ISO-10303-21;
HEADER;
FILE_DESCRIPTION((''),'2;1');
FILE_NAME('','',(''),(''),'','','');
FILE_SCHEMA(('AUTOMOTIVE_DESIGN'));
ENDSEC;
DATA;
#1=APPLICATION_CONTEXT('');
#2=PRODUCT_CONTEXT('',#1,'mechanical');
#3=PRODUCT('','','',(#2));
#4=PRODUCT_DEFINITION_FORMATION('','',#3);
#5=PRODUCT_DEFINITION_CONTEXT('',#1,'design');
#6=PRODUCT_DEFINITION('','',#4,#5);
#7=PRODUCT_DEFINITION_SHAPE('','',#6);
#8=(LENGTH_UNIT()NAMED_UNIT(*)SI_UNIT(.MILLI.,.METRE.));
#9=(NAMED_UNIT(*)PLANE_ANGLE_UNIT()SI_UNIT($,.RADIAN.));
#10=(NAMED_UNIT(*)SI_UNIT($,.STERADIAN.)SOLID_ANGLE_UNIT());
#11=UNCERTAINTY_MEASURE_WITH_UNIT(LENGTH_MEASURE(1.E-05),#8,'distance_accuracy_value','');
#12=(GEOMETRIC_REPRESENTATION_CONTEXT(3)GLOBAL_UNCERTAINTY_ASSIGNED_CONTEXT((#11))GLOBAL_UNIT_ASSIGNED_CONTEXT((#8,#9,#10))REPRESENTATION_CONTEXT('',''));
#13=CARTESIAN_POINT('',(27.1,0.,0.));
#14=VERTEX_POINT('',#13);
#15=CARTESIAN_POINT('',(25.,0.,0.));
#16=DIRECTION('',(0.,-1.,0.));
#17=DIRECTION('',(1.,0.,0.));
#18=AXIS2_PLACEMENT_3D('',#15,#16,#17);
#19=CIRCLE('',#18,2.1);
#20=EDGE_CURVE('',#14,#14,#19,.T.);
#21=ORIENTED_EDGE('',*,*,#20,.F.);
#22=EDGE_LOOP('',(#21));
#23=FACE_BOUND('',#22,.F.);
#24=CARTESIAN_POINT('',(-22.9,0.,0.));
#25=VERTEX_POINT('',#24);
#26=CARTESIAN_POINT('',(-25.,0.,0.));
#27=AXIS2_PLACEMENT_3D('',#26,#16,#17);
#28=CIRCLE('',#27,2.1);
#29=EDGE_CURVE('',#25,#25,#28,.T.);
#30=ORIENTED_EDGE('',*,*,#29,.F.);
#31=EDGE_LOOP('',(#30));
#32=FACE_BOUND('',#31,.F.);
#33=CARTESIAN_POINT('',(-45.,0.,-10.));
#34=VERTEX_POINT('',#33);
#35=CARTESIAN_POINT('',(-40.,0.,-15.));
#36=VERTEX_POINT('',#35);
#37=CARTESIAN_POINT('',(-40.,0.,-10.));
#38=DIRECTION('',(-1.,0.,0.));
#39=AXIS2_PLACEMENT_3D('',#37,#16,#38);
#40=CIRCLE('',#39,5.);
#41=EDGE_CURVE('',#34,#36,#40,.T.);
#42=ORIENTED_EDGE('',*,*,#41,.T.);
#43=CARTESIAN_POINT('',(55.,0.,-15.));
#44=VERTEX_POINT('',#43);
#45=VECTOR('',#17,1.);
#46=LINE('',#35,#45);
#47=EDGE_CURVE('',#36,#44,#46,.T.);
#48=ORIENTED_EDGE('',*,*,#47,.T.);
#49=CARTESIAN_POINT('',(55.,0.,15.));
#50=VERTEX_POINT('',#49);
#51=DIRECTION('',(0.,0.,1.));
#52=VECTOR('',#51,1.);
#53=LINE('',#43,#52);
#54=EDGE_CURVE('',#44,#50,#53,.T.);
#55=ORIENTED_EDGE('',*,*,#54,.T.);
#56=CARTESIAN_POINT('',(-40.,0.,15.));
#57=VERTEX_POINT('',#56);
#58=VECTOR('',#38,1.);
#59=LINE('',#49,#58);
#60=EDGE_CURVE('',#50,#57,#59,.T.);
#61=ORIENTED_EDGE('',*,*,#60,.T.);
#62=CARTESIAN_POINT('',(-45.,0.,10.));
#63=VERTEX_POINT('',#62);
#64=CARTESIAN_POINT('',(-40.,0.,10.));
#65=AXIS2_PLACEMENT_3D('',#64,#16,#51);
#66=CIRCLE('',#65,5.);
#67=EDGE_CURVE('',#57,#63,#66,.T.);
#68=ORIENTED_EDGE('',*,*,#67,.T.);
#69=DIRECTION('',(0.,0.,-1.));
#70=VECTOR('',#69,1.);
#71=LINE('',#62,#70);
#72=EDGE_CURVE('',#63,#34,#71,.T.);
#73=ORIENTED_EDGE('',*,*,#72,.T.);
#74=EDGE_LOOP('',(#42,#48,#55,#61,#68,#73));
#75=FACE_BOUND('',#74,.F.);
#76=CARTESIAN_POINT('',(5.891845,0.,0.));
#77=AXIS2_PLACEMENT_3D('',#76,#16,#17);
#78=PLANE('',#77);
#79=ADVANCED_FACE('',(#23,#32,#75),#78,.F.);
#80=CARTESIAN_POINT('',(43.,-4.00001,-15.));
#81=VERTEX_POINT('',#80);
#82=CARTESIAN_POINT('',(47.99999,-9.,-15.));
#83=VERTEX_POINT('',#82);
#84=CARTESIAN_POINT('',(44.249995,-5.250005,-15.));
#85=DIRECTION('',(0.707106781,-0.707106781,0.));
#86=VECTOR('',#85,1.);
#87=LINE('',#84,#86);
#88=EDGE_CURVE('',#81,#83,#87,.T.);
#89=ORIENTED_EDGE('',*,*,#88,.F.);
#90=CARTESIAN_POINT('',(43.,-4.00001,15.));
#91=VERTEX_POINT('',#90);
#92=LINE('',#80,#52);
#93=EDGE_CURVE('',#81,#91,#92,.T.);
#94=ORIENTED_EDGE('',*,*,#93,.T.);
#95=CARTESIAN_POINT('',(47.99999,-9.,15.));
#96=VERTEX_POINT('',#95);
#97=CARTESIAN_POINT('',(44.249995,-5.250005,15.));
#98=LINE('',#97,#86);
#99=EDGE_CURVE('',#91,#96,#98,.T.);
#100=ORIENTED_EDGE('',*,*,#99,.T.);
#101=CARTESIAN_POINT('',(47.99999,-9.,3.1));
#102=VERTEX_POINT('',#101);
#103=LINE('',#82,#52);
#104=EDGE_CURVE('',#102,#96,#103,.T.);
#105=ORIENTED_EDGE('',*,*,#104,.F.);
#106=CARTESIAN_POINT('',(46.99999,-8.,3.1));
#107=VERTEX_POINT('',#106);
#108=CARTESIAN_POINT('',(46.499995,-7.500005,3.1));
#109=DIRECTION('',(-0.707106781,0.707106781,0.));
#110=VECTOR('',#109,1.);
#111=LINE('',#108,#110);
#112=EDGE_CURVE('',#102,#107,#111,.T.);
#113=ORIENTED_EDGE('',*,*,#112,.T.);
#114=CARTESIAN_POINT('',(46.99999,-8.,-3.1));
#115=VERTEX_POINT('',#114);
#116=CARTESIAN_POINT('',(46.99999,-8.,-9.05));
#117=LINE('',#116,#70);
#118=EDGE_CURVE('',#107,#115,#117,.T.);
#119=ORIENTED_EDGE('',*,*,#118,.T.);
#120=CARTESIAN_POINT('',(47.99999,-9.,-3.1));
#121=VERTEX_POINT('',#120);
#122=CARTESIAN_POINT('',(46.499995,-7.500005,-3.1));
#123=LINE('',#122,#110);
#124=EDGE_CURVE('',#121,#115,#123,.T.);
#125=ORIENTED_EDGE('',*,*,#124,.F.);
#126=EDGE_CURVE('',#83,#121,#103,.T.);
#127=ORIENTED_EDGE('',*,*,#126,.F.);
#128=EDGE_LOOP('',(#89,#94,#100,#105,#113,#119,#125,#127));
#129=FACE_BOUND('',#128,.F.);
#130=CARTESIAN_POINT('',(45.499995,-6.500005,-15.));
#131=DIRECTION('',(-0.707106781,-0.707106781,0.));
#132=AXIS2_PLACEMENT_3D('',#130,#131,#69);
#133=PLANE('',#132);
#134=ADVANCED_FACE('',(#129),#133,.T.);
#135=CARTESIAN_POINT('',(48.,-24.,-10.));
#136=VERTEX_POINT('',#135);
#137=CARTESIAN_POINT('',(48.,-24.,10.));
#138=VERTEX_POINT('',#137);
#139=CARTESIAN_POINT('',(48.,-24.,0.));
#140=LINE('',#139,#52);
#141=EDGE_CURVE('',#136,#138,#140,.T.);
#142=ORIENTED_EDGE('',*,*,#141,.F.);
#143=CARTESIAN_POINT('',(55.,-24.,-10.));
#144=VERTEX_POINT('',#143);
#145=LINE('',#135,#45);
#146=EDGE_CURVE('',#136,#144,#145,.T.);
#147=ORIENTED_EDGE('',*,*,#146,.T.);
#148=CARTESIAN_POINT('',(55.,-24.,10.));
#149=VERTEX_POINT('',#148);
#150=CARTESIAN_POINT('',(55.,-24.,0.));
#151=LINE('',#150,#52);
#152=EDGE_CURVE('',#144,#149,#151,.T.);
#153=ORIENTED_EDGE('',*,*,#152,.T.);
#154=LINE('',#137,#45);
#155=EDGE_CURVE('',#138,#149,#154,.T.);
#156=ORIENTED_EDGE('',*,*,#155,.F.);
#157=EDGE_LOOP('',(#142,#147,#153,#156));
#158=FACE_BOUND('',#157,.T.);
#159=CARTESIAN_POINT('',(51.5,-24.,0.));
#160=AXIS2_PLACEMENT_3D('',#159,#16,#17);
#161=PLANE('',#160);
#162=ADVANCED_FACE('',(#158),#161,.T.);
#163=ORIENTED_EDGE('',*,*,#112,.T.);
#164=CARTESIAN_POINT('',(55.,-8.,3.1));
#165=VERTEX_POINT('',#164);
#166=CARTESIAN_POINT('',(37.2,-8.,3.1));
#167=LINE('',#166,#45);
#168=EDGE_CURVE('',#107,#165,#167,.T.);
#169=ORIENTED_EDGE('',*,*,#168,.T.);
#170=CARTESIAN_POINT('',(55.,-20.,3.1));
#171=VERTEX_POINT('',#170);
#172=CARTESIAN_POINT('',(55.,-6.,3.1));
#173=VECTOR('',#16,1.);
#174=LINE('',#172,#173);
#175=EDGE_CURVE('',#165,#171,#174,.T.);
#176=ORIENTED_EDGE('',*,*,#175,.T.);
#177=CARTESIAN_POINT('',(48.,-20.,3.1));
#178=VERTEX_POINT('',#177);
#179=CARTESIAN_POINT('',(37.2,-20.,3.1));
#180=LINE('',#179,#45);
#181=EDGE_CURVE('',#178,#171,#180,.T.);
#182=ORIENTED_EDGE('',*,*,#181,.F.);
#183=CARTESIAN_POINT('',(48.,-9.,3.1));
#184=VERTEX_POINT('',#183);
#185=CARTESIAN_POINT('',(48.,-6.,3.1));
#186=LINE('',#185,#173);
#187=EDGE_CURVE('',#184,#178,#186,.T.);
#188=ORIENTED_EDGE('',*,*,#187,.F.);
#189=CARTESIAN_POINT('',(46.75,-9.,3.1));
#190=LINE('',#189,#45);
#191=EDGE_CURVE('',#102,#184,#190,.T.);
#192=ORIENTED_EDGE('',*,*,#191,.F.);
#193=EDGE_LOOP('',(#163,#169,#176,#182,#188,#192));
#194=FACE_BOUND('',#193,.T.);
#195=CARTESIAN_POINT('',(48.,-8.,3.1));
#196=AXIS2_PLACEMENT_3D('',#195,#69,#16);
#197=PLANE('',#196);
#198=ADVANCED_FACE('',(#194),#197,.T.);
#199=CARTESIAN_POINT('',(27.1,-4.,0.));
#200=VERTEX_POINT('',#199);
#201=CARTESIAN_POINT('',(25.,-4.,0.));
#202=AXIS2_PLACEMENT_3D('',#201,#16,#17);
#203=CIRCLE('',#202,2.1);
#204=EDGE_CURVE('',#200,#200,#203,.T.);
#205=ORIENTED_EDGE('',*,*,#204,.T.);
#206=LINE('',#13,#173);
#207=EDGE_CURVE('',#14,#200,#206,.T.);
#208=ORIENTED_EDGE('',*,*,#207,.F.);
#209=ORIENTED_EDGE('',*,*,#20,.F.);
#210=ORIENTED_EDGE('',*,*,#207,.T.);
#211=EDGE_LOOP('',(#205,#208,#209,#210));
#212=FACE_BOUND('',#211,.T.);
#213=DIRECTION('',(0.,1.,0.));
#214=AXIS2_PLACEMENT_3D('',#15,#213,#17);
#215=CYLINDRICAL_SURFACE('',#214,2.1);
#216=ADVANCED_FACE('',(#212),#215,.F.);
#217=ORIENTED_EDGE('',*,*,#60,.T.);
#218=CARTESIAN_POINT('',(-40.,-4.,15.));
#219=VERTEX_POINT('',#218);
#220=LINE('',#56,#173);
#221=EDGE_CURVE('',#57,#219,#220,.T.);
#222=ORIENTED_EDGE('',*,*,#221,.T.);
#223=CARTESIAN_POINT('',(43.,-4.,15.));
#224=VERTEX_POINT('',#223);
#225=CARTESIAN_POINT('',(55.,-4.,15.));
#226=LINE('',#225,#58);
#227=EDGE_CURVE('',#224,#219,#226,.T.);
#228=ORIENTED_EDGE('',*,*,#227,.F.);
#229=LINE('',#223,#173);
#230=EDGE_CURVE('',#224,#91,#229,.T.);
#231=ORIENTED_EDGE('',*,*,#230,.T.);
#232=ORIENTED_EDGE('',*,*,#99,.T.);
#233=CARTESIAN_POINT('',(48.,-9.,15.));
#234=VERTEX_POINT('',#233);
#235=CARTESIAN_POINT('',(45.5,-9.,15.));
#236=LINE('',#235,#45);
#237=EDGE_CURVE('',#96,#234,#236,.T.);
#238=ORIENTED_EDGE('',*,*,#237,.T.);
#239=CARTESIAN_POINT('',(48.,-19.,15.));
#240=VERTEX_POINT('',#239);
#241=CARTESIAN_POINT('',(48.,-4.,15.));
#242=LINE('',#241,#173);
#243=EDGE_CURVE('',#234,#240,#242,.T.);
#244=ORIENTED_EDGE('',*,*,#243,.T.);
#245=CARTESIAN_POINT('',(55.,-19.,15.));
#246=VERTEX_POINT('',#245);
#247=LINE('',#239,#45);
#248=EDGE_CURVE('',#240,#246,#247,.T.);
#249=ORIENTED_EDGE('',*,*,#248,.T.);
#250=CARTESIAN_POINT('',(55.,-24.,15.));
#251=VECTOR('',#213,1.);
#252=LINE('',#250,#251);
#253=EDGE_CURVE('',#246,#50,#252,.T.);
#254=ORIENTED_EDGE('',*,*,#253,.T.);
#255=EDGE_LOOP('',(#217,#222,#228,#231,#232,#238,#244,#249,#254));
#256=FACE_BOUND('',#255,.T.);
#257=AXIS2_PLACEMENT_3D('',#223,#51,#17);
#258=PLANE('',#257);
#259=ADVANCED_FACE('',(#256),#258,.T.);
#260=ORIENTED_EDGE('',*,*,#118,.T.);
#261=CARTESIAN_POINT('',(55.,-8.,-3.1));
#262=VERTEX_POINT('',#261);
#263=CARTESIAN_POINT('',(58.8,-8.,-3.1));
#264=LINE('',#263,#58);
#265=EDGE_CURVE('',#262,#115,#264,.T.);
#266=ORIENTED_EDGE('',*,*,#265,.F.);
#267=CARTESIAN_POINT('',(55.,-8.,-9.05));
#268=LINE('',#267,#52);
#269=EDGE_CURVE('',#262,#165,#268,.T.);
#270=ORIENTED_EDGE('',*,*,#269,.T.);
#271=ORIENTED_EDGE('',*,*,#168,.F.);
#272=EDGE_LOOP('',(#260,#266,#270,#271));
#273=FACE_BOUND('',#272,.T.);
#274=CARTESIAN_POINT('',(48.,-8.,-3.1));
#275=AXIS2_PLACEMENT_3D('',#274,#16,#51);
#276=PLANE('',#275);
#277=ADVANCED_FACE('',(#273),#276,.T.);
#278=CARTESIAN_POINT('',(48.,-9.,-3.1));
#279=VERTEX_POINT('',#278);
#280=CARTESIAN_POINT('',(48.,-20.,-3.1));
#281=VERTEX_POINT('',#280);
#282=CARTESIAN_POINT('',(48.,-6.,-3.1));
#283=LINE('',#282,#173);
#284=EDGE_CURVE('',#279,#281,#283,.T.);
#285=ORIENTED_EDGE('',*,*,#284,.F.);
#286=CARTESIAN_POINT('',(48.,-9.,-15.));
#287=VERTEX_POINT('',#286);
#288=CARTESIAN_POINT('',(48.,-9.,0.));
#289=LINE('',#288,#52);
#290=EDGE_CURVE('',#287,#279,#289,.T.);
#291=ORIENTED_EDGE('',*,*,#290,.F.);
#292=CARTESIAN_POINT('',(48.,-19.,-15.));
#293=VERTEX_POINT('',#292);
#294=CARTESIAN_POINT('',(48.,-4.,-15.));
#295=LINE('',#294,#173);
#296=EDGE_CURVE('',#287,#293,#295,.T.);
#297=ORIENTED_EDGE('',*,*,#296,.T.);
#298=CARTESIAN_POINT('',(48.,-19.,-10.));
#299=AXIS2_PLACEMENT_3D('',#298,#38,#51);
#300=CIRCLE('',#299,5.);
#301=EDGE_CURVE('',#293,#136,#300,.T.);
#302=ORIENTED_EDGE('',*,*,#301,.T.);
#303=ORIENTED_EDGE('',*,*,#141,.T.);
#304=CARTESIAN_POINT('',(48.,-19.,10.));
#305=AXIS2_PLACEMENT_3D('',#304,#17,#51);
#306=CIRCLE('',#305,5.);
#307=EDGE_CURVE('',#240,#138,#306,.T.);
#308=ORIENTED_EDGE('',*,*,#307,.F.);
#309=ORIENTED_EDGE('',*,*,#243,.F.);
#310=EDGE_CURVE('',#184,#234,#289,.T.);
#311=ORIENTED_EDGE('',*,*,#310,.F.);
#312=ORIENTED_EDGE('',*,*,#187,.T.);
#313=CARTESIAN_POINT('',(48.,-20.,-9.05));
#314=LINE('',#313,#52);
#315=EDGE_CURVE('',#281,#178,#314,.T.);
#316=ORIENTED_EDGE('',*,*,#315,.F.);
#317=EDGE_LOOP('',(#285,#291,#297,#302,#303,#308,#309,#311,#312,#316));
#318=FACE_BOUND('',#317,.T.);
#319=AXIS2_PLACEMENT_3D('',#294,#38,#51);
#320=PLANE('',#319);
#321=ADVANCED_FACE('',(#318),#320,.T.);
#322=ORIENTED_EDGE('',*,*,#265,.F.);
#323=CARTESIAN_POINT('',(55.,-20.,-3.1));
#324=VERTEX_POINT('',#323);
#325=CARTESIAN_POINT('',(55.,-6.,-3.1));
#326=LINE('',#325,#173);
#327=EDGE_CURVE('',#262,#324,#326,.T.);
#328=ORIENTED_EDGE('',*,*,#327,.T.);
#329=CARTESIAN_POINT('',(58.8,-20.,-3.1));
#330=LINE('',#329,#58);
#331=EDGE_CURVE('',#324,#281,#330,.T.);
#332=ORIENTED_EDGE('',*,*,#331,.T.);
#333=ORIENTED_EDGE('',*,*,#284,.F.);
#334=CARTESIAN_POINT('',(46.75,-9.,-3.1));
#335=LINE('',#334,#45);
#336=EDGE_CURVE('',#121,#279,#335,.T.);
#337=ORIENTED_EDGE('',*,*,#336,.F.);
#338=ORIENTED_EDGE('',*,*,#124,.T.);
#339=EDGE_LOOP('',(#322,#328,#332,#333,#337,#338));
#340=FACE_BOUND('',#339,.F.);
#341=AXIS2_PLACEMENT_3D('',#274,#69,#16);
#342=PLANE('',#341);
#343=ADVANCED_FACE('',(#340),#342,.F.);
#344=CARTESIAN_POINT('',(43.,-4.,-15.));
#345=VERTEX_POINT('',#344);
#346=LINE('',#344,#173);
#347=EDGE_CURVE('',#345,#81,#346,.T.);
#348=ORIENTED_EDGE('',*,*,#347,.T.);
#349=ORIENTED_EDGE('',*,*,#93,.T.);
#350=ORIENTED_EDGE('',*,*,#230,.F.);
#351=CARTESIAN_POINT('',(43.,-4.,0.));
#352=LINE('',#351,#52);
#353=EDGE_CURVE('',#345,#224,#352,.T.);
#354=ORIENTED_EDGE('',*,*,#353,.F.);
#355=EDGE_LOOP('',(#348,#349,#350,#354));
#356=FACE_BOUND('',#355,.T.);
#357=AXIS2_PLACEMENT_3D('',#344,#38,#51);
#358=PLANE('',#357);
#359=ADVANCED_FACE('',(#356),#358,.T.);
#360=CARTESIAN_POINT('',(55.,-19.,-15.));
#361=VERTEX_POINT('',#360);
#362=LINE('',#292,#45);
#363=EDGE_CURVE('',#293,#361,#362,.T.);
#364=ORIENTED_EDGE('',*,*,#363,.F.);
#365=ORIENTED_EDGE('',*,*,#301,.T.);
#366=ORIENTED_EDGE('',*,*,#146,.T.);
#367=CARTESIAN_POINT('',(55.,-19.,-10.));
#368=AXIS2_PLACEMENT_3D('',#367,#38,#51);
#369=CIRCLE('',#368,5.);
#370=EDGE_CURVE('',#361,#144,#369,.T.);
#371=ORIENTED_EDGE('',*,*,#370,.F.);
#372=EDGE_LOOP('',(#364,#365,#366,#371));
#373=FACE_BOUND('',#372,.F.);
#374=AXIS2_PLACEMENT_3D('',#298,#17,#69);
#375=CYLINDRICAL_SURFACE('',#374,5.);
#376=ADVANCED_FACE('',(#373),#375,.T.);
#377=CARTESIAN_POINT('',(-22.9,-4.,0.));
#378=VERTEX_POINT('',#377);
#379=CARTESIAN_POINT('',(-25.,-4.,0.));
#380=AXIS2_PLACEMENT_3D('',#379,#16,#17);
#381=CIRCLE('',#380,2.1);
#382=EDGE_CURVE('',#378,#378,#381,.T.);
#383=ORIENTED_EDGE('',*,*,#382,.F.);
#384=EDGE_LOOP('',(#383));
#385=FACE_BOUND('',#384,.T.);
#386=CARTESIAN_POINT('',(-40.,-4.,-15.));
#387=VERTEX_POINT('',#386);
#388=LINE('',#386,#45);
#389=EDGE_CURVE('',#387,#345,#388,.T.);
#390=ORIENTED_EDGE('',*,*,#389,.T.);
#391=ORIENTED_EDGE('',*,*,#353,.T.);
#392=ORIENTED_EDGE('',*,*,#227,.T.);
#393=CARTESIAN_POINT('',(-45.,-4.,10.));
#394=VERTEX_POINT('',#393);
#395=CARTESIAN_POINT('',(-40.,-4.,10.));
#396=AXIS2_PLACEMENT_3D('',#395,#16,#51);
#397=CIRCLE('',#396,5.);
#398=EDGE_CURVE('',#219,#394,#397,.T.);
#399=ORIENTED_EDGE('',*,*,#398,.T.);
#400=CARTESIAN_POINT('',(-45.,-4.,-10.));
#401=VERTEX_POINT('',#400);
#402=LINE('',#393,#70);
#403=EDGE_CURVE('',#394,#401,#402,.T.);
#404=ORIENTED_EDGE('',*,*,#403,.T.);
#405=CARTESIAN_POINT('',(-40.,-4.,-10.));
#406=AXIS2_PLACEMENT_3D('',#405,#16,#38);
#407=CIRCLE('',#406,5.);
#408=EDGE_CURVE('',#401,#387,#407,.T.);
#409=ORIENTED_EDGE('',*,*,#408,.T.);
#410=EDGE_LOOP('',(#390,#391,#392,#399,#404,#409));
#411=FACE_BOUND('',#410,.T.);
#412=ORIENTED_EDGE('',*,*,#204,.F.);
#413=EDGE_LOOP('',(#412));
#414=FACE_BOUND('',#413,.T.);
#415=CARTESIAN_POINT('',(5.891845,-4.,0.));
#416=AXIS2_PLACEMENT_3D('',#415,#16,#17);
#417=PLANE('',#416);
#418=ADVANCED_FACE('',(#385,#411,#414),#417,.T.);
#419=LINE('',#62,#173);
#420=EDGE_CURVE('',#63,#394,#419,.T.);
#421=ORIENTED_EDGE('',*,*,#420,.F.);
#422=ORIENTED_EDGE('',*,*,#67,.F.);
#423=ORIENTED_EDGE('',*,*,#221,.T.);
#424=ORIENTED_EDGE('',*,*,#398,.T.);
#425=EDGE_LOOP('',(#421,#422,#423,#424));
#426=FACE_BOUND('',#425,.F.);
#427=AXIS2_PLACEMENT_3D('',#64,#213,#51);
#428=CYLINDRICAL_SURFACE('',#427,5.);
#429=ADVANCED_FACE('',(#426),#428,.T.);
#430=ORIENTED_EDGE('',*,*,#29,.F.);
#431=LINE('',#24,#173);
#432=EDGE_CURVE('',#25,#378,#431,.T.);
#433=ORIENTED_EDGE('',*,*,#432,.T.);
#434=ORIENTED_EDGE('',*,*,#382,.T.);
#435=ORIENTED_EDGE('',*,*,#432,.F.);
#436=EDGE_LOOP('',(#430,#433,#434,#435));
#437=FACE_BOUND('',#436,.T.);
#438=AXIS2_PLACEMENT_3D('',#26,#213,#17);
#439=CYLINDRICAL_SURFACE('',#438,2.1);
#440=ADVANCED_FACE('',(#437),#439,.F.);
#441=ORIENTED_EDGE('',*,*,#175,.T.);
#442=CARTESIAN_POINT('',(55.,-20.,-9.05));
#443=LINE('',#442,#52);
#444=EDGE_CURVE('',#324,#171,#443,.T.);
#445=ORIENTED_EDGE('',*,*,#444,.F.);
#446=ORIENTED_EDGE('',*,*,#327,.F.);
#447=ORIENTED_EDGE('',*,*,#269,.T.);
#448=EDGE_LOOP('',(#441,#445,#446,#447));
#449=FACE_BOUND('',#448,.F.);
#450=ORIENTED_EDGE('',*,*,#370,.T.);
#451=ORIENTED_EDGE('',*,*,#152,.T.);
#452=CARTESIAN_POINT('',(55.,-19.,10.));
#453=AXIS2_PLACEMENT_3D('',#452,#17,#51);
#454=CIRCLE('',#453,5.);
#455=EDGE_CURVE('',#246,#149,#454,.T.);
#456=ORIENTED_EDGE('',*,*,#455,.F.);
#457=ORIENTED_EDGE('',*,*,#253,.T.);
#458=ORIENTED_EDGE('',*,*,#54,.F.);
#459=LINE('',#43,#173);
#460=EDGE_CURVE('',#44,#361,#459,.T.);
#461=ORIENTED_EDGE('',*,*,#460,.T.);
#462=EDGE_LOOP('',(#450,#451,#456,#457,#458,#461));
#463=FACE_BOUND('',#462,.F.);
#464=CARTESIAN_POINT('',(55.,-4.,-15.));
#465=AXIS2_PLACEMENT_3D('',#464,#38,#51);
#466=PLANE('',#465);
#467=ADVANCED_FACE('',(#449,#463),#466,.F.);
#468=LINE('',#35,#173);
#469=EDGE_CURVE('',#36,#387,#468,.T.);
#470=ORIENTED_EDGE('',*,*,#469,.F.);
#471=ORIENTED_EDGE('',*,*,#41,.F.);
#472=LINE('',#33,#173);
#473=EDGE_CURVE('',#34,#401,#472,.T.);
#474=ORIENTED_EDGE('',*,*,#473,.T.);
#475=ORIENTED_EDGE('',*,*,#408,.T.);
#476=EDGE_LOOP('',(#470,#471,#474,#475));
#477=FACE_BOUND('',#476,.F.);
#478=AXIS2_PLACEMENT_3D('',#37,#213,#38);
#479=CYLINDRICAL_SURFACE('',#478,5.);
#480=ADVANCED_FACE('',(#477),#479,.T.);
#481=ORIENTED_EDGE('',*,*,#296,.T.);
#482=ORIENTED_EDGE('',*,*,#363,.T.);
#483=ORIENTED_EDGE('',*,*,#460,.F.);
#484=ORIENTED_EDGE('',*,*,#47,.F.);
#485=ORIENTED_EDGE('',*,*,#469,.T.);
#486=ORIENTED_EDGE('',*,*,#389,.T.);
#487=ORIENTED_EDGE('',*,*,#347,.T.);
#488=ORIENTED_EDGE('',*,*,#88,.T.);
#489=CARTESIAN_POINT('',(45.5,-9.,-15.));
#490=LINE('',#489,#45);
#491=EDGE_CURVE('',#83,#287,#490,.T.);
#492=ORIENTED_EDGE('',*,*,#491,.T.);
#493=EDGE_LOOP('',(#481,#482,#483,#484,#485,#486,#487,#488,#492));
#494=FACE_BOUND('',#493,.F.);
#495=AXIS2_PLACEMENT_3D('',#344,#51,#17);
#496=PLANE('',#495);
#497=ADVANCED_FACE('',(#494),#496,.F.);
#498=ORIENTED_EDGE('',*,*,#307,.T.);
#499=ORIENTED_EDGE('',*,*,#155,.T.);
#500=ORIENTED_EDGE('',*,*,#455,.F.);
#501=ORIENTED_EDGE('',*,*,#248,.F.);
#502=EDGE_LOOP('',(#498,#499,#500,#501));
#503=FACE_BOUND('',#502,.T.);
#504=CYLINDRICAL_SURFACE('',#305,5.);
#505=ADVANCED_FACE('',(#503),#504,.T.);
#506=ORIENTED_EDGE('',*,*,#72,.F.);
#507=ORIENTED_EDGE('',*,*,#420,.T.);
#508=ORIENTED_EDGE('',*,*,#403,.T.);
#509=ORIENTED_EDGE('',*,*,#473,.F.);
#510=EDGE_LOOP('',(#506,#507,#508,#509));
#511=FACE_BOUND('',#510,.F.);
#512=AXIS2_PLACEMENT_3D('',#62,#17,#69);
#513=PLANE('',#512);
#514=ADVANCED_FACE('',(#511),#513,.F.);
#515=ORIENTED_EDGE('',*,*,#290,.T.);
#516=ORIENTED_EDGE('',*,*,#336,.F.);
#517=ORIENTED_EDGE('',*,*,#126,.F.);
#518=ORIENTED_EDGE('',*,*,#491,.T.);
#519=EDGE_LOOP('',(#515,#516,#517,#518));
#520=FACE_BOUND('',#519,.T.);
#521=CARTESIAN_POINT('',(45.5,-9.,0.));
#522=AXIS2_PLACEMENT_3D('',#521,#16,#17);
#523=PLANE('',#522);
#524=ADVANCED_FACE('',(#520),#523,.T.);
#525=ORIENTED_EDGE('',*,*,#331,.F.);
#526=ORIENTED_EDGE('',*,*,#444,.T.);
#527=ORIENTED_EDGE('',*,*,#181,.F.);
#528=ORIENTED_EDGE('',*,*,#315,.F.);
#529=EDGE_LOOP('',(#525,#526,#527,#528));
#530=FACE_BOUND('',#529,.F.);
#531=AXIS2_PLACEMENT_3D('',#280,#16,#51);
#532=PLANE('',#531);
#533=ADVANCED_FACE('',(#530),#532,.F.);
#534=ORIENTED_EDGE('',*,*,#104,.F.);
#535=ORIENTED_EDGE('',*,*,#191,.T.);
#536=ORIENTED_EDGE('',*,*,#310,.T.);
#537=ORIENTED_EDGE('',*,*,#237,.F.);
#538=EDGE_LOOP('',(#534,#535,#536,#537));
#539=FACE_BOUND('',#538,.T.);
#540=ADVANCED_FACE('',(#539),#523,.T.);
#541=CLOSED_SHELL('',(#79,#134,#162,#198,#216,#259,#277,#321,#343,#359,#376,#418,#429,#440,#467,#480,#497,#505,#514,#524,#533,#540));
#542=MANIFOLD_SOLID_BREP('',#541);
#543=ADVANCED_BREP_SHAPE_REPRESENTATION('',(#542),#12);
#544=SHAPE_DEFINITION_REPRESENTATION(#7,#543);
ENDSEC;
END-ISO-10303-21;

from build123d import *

# Parameters (mm, degrees)
F0_R     = 2.1
F1_DEPTH = 4
F2_W     = 7
F2_H     = 30
F3_DEPTH = 20
F5_W     = 5
F5_H     = 30
F6_DEPTH = 5
F7_SIZE  = 4.99999
F4_W     = 12
F4_H     = 6.2
F8_DEPTH = 10.8
F9_R     = 5


# Not quite as in the source:
# - a fillet or chamfer is up to 0.001 mm smaller than in the source, because OpenCascade refuses the exact size


with BuildPart() as f1:
    # F0 (on Front) → F1 (new body)
    with BuildSketch(Plane.XZ):
        with BuildLine():
            Line((55, 15), (-40, 15))
            ThreePointArc((-40, 15), (-43.5355339059, 13.5355339059), (-45, 10))
            Line((-45, 10), (-45, -10))
            ThreePointArc((-45, -10), (-43.5355339059, -13.5355339059), (-40, -15))
            Line((-40, -15), (55, -15))
            Line((55, -15), (55, 15))
        make_face()
        with Locations((-25, 0)):
            Circle(F0_R, mode=Mode.SUBTRACT)
        with Locations((25, 0)):
            Circle(F0_R, mode=Mode.SUBTRACT)
    extrude(amount=F1_DEPTH)

    # F2 (on face) → F3 (join)
    with BuildSketch(Plane.XZ.offset(4)):
        with Locations((51.5, 0)):
            Rectangle(F2_W, F2_H)
    extrude(amount=F3_DEPTH)

    # F5 (on face) → F6 (join)
    with BuildSketch(Plane.XZ.offset(4)):
        with Locations((45.5, 0)):
            Rectangle(F5_W, F5_H)
    extrude(amount=F6_DEPTH)

    # F7 (size 5 in the source; OpenCascade refuses exactly that, so slightly less here)
    f7_edges = [f1.edges().sort_by_distance(p)[0] for p in [
        (43, -9, 0),
    ]]
    chamfer(f7_edges, length=F7_SIZE)

    # F4 (on face) → F8 (cut, symmetric)
    with BuildSketch(Plane(origin=(48, 0, 0), x_dir=(0, -1, 0), z_dir=(-1, 0, 0))):
        with Locations((14, 0)):
            Rectangle(F4_W, F4_H)
    extrude(amount=F8_DEPTH, both=True, mode=Mode.SUBTRACT)

    # F9
    f9_edges = [f1.edges().sort_by_distance(p)[0] for p in [
        (51.5, -24, 15),
        (51.5, -24, -15),
    ]]
    fillet(f9_edges, radius=F9_R)


solid = f1.part
